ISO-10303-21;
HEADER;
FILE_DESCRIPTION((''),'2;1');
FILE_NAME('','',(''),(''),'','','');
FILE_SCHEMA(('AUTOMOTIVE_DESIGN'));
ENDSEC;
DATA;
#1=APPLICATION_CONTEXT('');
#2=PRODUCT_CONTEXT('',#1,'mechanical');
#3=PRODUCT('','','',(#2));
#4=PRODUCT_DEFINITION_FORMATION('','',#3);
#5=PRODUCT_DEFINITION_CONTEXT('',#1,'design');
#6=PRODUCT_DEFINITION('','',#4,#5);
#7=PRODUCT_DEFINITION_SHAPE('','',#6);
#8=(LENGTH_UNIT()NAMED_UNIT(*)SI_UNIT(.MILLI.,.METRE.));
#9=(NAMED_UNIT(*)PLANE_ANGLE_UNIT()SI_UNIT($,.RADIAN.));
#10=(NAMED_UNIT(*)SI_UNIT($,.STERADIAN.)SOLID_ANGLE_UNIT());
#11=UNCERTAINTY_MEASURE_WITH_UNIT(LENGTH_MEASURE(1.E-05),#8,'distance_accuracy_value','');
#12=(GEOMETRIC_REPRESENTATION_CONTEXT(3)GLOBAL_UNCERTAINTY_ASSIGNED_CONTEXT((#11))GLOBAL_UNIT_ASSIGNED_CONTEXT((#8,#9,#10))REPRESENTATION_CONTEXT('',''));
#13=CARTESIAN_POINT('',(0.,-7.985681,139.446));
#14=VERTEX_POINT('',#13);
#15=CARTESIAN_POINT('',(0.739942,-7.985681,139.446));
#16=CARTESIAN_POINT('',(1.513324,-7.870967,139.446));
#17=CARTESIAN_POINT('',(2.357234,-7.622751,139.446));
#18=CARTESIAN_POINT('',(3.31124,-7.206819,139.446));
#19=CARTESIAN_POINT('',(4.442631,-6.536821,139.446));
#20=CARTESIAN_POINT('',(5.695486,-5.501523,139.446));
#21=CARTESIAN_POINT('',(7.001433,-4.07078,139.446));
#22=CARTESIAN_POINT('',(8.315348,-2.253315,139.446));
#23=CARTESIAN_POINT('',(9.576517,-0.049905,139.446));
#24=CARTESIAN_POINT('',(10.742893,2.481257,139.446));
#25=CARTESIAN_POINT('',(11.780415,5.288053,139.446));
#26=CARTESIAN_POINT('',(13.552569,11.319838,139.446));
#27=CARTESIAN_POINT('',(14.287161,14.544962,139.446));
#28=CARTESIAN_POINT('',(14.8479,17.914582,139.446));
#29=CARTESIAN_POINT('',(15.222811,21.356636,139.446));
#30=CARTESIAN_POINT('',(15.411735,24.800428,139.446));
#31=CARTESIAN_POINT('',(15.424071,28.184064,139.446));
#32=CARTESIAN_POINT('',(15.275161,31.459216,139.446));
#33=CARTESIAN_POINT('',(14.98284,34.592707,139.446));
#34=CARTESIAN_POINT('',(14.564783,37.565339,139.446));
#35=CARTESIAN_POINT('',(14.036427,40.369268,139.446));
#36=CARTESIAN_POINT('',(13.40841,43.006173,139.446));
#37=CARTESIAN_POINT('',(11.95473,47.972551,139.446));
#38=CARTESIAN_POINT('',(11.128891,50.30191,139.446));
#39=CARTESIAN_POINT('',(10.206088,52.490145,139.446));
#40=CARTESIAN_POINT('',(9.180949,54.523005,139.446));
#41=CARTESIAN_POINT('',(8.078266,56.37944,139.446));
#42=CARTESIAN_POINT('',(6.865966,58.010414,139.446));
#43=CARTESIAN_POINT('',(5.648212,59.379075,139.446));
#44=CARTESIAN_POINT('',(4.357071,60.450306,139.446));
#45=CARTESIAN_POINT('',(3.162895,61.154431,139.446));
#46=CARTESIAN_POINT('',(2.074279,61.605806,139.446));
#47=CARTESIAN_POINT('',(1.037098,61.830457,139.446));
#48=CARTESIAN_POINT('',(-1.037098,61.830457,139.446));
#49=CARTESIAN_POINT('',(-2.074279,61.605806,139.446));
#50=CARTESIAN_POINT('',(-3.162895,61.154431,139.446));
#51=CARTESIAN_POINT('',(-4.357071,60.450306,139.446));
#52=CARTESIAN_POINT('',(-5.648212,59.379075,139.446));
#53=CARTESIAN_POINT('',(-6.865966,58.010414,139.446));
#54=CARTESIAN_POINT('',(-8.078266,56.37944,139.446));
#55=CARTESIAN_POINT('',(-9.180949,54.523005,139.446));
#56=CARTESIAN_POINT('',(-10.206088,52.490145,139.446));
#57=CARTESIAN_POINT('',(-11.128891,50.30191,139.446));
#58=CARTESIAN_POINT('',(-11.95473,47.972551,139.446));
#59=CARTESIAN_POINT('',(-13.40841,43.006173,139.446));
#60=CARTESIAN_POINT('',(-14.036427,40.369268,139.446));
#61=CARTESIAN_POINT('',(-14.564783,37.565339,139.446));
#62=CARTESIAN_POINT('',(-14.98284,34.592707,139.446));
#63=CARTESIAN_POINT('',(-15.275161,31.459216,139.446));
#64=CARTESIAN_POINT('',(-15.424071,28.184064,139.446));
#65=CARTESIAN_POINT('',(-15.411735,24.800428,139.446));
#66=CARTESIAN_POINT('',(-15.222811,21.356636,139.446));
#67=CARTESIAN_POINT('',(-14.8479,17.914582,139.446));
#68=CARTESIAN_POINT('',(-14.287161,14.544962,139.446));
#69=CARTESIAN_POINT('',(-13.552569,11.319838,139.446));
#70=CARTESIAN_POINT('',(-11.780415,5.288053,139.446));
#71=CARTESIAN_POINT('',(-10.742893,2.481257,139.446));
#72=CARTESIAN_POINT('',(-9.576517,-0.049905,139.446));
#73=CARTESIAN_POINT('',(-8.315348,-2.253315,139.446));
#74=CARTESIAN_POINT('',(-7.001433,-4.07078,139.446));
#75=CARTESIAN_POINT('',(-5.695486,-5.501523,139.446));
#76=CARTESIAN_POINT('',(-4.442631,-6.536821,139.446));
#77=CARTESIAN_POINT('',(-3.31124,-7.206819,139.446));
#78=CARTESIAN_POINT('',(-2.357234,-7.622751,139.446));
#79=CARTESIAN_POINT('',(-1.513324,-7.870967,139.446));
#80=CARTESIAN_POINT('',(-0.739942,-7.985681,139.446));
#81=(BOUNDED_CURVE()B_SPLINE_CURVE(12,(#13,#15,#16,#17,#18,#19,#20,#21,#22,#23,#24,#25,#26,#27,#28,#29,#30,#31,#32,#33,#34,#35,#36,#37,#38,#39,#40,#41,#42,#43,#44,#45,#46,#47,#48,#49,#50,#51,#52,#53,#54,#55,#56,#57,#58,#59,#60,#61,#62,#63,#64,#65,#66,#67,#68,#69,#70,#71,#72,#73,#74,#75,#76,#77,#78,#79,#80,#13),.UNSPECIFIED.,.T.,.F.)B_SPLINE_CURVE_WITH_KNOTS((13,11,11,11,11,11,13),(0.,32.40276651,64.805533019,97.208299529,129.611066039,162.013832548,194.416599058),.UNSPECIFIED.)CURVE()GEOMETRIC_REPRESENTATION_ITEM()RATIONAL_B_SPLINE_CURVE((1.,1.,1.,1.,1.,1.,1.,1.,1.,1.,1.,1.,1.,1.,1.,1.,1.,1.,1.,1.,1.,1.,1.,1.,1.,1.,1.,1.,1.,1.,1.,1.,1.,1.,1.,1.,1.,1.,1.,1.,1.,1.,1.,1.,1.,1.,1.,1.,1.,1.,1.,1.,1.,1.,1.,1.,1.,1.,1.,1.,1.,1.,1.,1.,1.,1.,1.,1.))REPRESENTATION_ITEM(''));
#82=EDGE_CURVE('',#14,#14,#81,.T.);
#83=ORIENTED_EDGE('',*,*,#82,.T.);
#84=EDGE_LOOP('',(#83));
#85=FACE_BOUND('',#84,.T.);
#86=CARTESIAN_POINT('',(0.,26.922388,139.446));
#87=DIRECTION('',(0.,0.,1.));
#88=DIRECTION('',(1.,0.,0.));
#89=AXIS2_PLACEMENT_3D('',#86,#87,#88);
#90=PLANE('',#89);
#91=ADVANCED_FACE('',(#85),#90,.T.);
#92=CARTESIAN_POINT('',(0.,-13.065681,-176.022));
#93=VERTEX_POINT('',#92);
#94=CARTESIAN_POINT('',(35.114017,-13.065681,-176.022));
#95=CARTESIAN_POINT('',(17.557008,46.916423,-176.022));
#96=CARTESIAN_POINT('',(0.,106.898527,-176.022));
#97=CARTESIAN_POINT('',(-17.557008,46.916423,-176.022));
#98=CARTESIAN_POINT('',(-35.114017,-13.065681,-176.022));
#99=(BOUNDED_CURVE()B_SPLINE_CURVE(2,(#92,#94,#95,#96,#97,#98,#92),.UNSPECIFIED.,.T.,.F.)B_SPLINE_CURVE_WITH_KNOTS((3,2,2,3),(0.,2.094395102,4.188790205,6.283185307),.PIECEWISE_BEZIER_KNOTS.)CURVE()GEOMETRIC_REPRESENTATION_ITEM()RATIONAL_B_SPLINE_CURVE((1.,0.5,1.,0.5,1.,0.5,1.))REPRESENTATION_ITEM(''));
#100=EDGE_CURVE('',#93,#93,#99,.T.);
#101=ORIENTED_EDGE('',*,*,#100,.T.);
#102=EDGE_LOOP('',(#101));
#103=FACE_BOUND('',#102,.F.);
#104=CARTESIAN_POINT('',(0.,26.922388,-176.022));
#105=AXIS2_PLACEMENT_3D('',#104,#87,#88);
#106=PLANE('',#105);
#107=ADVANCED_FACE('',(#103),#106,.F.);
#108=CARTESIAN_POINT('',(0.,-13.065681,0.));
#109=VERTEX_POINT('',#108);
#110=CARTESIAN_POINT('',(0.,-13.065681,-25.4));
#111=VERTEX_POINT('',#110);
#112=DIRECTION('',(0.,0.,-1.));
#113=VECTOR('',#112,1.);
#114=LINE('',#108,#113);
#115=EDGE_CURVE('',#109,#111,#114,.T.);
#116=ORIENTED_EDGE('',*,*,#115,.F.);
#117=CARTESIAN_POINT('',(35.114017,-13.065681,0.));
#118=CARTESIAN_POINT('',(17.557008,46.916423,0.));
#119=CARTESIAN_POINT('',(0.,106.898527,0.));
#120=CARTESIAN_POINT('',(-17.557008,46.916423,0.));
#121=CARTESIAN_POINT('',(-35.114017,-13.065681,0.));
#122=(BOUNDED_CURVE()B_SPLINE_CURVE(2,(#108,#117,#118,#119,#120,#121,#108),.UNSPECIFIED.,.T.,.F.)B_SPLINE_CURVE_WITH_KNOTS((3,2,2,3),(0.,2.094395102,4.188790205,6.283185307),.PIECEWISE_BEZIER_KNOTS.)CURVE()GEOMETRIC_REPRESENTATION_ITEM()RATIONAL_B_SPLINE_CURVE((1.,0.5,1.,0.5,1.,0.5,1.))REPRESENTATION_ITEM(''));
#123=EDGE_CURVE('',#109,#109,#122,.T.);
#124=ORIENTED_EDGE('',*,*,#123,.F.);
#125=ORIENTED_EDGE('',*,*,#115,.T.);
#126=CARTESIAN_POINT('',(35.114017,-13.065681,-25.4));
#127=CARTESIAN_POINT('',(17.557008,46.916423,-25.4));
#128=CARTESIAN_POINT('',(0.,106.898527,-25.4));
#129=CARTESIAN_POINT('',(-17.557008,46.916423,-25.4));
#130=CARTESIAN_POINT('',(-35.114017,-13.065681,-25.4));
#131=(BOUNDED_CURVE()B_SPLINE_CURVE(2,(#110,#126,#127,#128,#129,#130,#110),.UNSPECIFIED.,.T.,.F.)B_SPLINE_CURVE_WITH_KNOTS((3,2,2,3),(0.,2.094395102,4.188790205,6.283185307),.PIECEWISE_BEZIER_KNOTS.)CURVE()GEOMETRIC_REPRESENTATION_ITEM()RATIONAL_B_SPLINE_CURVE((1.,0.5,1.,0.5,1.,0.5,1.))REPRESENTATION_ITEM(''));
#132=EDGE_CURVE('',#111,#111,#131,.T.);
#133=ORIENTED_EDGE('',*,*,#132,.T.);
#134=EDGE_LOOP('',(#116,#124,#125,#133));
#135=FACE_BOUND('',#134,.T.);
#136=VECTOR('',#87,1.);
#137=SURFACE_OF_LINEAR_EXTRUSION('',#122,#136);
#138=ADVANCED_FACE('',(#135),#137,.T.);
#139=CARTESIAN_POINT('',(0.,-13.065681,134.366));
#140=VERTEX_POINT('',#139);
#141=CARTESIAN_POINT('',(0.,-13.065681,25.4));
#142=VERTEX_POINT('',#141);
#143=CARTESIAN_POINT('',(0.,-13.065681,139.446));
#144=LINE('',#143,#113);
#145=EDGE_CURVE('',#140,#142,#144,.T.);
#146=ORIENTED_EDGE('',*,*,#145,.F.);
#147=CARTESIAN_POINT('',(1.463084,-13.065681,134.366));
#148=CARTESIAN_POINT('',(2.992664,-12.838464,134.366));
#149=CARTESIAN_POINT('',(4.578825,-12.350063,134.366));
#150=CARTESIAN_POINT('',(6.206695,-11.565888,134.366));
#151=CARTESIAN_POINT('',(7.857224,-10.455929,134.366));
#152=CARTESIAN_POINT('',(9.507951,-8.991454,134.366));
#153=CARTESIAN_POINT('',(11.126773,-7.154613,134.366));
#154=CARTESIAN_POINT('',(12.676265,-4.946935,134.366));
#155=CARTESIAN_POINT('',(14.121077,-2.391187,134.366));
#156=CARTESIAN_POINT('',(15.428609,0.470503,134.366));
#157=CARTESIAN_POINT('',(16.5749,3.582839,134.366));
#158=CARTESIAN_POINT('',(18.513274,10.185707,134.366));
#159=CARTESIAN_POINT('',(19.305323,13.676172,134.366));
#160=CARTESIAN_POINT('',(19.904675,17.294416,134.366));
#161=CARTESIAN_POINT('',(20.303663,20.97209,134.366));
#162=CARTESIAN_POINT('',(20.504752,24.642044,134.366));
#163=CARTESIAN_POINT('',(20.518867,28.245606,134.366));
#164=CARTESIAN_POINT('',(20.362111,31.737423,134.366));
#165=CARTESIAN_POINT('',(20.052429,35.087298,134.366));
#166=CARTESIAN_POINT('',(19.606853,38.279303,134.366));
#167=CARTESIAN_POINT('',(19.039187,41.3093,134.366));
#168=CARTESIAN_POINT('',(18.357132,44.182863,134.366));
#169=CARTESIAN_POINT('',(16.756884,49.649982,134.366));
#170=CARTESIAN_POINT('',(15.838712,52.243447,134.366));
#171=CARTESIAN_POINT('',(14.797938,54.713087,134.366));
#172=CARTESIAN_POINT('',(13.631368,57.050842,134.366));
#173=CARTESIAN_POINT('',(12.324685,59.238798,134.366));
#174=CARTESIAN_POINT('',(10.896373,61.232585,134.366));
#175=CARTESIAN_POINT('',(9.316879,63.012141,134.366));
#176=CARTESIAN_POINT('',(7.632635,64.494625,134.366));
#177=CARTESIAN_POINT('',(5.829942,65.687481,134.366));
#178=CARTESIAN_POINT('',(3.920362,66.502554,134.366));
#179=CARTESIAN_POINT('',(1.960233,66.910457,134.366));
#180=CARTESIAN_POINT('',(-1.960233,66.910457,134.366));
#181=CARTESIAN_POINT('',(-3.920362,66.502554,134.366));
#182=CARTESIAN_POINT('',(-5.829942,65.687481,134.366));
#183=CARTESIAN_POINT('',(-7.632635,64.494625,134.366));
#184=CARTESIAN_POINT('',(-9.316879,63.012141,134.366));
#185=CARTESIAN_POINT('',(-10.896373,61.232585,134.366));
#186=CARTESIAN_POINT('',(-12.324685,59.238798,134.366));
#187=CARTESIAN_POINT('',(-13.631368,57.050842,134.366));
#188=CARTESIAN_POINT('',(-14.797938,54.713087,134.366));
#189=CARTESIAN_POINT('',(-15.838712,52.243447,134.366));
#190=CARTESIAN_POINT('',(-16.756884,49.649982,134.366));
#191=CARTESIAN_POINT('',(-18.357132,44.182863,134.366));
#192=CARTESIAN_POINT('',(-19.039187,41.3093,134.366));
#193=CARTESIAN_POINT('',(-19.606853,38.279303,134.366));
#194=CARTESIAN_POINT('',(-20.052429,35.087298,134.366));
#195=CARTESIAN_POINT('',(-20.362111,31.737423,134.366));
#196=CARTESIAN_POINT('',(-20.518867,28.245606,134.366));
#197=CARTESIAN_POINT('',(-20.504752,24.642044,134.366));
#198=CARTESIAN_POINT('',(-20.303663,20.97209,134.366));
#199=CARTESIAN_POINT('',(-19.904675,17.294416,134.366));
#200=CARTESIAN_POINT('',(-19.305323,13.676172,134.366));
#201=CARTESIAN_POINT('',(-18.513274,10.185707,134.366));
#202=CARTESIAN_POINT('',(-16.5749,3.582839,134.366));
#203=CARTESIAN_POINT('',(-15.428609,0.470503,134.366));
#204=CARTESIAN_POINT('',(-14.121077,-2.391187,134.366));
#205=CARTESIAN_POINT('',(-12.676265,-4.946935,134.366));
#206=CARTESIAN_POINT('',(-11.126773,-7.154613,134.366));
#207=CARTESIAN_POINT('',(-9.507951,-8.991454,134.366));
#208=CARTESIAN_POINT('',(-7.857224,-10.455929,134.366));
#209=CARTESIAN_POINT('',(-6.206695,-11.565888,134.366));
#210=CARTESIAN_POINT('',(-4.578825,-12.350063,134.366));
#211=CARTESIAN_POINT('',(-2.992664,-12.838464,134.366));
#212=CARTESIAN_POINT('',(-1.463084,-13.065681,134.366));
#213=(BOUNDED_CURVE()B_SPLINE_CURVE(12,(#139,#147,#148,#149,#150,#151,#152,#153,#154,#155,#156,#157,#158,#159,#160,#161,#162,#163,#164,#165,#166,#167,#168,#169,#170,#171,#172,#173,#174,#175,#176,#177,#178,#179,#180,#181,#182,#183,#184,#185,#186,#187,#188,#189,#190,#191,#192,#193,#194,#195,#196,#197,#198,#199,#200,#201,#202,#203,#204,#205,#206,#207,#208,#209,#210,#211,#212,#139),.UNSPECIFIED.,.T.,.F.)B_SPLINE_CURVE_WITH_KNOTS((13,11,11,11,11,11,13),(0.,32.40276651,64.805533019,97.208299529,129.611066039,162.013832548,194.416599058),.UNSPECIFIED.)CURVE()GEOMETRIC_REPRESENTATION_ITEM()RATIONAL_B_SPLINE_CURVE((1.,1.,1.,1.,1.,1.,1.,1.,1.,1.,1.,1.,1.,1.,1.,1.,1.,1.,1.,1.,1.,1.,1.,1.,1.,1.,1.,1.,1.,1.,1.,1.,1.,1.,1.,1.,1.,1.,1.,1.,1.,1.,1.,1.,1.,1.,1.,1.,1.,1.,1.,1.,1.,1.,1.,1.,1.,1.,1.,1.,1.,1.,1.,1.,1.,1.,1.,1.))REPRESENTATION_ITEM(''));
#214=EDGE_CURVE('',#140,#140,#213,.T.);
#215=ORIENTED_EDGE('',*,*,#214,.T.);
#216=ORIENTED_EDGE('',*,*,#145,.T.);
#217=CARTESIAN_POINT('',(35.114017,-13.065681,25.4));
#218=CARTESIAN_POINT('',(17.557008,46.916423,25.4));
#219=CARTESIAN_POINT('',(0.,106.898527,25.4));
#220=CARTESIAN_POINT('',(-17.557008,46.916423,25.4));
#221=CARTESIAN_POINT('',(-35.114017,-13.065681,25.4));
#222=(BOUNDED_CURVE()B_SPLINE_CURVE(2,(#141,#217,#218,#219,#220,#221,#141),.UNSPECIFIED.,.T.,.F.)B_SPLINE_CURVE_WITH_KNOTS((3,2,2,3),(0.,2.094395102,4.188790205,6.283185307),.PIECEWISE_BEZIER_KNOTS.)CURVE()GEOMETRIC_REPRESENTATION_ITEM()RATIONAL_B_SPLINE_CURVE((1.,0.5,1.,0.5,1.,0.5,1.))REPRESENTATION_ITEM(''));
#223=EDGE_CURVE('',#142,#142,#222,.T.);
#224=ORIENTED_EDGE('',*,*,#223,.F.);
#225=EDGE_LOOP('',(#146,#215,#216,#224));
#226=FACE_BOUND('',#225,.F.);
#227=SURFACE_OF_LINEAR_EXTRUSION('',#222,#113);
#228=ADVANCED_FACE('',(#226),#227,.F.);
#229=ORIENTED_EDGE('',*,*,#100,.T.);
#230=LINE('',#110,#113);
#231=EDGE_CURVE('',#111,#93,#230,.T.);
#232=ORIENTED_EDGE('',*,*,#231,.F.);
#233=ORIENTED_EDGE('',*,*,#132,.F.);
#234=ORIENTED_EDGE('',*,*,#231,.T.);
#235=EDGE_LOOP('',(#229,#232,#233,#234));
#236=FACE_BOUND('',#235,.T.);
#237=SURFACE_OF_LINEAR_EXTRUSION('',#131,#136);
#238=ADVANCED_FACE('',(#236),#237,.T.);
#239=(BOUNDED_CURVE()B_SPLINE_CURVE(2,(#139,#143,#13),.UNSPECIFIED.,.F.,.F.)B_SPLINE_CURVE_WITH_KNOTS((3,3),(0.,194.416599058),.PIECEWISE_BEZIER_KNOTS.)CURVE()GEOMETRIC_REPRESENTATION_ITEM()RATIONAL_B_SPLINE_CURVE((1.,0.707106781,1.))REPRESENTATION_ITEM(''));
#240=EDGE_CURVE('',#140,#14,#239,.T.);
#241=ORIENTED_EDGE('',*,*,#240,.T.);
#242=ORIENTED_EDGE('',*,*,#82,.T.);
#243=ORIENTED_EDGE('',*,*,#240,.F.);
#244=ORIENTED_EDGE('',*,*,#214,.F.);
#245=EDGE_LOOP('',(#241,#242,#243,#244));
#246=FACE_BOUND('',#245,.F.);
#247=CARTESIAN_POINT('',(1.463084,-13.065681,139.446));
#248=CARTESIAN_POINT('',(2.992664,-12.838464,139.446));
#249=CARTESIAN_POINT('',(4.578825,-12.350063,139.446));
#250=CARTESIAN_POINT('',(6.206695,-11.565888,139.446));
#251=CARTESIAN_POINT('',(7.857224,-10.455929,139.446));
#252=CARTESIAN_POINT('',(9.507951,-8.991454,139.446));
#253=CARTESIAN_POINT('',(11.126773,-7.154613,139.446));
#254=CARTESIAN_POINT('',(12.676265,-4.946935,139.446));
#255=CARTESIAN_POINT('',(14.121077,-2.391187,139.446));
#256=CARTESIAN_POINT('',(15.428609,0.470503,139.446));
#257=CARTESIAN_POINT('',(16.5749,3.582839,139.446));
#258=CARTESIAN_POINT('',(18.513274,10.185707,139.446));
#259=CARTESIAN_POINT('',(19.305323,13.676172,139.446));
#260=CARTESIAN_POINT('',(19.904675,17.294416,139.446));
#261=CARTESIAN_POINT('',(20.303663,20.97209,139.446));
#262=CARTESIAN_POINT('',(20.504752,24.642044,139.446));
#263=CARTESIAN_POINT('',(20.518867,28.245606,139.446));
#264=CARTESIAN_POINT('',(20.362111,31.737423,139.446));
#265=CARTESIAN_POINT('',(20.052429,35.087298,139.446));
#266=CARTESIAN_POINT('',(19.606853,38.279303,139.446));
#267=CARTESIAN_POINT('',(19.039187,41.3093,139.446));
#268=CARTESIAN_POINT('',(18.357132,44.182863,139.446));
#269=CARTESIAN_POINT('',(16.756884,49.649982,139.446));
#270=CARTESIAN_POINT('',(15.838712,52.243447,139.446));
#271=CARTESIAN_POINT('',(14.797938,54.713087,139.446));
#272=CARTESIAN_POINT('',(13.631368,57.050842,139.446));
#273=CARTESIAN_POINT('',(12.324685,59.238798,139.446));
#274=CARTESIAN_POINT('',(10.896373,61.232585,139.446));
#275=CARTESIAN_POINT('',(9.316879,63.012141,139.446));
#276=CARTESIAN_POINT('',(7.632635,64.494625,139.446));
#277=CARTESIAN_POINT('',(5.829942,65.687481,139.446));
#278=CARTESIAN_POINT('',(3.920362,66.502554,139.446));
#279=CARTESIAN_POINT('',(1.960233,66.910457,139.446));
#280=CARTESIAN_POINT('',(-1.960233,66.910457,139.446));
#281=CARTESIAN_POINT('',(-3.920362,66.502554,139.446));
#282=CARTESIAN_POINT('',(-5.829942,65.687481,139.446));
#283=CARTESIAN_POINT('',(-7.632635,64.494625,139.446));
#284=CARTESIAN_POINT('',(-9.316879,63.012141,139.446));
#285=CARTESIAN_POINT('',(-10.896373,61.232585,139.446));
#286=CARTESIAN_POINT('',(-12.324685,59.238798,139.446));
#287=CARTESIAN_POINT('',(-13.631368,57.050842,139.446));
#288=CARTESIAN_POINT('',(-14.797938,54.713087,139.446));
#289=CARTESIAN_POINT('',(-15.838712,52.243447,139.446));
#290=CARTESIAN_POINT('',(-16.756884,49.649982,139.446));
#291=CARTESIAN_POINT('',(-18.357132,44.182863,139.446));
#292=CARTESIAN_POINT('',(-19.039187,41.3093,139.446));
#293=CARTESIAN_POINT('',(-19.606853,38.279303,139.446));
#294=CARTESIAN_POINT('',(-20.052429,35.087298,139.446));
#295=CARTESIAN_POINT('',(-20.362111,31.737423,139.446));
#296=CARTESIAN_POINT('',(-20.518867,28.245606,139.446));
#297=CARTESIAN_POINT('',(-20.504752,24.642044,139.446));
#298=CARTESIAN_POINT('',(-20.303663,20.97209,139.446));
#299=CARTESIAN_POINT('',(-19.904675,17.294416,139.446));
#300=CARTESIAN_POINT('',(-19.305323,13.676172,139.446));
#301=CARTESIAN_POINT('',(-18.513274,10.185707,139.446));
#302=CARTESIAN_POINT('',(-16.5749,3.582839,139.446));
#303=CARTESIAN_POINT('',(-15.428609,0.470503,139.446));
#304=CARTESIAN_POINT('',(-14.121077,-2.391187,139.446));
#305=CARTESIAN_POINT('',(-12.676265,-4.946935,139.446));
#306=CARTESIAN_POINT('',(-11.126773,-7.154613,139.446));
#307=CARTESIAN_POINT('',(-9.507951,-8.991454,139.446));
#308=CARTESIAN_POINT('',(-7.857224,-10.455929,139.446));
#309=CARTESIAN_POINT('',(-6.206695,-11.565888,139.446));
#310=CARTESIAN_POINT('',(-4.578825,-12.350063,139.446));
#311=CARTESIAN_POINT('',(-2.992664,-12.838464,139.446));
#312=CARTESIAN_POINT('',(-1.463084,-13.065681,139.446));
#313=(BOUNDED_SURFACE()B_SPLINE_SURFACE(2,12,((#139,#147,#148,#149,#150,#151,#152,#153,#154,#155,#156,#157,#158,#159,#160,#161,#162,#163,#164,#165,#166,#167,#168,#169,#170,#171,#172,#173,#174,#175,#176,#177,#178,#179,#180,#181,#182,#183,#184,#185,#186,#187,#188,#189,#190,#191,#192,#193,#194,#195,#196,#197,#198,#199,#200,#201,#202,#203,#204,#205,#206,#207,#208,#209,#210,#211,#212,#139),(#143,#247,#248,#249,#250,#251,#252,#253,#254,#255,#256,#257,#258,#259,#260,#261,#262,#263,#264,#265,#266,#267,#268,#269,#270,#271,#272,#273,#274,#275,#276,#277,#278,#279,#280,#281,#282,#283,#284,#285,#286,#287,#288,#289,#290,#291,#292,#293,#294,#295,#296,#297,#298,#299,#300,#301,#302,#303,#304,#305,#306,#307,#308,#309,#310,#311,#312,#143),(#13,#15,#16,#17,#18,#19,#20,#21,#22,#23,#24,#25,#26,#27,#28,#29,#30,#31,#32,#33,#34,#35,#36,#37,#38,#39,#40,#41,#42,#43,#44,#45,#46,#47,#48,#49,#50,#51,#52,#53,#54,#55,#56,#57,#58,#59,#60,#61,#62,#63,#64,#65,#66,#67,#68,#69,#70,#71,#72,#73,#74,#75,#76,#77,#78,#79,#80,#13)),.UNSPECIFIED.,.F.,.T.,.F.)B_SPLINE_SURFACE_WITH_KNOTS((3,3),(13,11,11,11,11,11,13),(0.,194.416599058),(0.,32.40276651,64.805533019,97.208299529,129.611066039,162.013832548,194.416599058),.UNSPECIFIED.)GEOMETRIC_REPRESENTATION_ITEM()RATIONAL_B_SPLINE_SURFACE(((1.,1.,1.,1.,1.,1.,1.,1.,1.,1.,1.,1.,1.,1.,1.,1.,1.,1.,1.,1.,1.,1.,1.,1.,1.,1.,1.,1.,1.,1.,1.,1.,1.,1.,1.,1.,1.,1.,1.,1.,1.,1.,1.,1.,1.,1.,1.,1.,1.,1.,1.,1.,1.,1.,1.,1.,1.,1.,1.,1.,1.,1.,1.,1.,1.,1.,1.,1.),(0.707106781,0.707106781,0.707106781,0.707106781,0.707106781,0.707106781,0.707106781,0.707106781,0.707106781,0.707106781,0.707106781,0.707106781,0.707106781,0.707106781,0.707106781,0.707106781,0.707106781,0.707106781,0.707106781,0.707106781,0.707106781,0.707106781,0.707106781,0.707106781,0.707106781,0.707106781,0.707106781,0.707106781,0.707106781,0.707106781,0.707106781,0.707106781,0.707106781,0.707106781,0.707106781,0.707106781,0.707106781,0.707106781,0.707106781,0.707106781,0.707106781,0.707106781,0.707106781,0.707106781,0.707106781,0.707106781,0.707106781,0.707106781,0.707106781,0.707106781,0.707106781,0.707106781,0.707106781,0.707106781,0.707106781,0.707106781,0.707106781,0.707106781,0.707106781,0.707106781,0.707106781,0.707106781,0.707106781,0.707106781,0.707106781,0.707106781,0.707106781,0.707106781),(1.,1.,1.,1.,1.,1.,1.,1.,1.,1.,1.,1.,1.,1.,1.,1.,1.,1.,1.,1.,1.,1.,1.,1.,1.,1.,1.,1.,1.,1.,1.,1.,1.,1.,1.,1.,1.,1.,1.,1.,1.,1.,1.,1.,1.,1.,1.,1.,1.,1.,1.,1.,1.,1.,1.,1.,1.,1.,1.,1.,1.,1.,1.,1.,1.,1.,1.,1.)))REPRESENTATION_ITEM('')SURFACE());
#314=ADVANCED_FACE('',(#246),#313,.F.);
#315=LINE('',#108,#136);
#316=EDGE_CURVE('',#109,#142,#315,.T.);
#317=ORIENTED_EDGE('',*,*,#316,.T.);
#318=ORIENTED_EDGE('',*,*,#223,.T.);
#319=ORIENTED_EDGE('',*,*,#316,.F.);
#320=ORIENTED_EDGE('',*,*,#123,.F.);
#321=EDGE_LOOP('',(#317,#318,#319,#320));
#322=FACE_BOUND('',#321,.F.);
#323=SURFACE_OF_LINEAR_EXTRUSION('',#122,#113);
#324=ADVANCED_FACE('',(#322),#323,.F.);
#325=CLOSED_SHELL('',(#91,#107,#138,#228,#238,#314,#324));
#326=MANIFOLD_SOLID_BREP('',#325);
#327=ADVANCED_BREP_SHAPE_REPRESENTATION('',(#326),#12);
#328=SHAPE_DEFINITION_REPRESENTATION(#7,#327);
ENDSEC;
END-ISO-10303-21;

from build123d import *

# Parameters (mm, degrees)
F1_DEPTH = 25.4
F2_DEPTH = 114.046
F3_DEPTH = 25.4
F4_DEPTH = 150.622
F5_R     = 5.08


with BuildPart() as f1:
    # F0 (on Top) → F1 (new body)
    with BuildSketch(Plane.XY):
        with BuildLine():
            add(Edge.make_bspline(
                [(0, -13.0656813346), (35.1140165882, -13.0656813346), (17.5570082941, 46.9164226707), (0, 106.898526676), (-17.5570082941, 46.9164226707), (-35.1140165882, -13.0656813346), (0, -13.0656813346)],
                knots=[0, 0, 0, 2.0943951024, 2.0943951024, 4.1887902048, 4.1887902048, 6.2831853072, 6.2831853072, 6.2831853072], degree=2, weights=[1, 0.5, 1, 0.5, 1, 0.5, 1]))
        make_face()
    extrude(amount=F1_DEPTH)

    # F2 (add): faces of the model
    f2_faces = [f1.faces().sort_by_distance(p)[0] for p in [
        (0, 27.019379561, 25.4),
        (0, 27.019379561, 0),
    ]]
    extrude(f2_faces, amount=F2_DEPTH, dir=(0, 0, 1))

    # F3 (add): a face of the model
    f3_faces = [f1.faces().sort_by_distance(p)[0] for p in [
        (0, 27.019379561, 0),
    ]]
    extrude(f3_faces, amount=F3_DEPTH)

    # F4 (add): a face of the model
    f4_faces = [f1.faces().sort_by_distance(p)[0] for p in [
        (0, 27.019379561, -25.4),
    ]]
    extrude(f4_faces, amount=F4_DEPTH)

    # F5
    f5_edges = [f1.edges().sort_by_distance(p)[0] for p in [
        (4e-06, 66.910457, 139.446),
    ]]
    fillet(f5_edges, radius=F5_R)


solid = f1.part
